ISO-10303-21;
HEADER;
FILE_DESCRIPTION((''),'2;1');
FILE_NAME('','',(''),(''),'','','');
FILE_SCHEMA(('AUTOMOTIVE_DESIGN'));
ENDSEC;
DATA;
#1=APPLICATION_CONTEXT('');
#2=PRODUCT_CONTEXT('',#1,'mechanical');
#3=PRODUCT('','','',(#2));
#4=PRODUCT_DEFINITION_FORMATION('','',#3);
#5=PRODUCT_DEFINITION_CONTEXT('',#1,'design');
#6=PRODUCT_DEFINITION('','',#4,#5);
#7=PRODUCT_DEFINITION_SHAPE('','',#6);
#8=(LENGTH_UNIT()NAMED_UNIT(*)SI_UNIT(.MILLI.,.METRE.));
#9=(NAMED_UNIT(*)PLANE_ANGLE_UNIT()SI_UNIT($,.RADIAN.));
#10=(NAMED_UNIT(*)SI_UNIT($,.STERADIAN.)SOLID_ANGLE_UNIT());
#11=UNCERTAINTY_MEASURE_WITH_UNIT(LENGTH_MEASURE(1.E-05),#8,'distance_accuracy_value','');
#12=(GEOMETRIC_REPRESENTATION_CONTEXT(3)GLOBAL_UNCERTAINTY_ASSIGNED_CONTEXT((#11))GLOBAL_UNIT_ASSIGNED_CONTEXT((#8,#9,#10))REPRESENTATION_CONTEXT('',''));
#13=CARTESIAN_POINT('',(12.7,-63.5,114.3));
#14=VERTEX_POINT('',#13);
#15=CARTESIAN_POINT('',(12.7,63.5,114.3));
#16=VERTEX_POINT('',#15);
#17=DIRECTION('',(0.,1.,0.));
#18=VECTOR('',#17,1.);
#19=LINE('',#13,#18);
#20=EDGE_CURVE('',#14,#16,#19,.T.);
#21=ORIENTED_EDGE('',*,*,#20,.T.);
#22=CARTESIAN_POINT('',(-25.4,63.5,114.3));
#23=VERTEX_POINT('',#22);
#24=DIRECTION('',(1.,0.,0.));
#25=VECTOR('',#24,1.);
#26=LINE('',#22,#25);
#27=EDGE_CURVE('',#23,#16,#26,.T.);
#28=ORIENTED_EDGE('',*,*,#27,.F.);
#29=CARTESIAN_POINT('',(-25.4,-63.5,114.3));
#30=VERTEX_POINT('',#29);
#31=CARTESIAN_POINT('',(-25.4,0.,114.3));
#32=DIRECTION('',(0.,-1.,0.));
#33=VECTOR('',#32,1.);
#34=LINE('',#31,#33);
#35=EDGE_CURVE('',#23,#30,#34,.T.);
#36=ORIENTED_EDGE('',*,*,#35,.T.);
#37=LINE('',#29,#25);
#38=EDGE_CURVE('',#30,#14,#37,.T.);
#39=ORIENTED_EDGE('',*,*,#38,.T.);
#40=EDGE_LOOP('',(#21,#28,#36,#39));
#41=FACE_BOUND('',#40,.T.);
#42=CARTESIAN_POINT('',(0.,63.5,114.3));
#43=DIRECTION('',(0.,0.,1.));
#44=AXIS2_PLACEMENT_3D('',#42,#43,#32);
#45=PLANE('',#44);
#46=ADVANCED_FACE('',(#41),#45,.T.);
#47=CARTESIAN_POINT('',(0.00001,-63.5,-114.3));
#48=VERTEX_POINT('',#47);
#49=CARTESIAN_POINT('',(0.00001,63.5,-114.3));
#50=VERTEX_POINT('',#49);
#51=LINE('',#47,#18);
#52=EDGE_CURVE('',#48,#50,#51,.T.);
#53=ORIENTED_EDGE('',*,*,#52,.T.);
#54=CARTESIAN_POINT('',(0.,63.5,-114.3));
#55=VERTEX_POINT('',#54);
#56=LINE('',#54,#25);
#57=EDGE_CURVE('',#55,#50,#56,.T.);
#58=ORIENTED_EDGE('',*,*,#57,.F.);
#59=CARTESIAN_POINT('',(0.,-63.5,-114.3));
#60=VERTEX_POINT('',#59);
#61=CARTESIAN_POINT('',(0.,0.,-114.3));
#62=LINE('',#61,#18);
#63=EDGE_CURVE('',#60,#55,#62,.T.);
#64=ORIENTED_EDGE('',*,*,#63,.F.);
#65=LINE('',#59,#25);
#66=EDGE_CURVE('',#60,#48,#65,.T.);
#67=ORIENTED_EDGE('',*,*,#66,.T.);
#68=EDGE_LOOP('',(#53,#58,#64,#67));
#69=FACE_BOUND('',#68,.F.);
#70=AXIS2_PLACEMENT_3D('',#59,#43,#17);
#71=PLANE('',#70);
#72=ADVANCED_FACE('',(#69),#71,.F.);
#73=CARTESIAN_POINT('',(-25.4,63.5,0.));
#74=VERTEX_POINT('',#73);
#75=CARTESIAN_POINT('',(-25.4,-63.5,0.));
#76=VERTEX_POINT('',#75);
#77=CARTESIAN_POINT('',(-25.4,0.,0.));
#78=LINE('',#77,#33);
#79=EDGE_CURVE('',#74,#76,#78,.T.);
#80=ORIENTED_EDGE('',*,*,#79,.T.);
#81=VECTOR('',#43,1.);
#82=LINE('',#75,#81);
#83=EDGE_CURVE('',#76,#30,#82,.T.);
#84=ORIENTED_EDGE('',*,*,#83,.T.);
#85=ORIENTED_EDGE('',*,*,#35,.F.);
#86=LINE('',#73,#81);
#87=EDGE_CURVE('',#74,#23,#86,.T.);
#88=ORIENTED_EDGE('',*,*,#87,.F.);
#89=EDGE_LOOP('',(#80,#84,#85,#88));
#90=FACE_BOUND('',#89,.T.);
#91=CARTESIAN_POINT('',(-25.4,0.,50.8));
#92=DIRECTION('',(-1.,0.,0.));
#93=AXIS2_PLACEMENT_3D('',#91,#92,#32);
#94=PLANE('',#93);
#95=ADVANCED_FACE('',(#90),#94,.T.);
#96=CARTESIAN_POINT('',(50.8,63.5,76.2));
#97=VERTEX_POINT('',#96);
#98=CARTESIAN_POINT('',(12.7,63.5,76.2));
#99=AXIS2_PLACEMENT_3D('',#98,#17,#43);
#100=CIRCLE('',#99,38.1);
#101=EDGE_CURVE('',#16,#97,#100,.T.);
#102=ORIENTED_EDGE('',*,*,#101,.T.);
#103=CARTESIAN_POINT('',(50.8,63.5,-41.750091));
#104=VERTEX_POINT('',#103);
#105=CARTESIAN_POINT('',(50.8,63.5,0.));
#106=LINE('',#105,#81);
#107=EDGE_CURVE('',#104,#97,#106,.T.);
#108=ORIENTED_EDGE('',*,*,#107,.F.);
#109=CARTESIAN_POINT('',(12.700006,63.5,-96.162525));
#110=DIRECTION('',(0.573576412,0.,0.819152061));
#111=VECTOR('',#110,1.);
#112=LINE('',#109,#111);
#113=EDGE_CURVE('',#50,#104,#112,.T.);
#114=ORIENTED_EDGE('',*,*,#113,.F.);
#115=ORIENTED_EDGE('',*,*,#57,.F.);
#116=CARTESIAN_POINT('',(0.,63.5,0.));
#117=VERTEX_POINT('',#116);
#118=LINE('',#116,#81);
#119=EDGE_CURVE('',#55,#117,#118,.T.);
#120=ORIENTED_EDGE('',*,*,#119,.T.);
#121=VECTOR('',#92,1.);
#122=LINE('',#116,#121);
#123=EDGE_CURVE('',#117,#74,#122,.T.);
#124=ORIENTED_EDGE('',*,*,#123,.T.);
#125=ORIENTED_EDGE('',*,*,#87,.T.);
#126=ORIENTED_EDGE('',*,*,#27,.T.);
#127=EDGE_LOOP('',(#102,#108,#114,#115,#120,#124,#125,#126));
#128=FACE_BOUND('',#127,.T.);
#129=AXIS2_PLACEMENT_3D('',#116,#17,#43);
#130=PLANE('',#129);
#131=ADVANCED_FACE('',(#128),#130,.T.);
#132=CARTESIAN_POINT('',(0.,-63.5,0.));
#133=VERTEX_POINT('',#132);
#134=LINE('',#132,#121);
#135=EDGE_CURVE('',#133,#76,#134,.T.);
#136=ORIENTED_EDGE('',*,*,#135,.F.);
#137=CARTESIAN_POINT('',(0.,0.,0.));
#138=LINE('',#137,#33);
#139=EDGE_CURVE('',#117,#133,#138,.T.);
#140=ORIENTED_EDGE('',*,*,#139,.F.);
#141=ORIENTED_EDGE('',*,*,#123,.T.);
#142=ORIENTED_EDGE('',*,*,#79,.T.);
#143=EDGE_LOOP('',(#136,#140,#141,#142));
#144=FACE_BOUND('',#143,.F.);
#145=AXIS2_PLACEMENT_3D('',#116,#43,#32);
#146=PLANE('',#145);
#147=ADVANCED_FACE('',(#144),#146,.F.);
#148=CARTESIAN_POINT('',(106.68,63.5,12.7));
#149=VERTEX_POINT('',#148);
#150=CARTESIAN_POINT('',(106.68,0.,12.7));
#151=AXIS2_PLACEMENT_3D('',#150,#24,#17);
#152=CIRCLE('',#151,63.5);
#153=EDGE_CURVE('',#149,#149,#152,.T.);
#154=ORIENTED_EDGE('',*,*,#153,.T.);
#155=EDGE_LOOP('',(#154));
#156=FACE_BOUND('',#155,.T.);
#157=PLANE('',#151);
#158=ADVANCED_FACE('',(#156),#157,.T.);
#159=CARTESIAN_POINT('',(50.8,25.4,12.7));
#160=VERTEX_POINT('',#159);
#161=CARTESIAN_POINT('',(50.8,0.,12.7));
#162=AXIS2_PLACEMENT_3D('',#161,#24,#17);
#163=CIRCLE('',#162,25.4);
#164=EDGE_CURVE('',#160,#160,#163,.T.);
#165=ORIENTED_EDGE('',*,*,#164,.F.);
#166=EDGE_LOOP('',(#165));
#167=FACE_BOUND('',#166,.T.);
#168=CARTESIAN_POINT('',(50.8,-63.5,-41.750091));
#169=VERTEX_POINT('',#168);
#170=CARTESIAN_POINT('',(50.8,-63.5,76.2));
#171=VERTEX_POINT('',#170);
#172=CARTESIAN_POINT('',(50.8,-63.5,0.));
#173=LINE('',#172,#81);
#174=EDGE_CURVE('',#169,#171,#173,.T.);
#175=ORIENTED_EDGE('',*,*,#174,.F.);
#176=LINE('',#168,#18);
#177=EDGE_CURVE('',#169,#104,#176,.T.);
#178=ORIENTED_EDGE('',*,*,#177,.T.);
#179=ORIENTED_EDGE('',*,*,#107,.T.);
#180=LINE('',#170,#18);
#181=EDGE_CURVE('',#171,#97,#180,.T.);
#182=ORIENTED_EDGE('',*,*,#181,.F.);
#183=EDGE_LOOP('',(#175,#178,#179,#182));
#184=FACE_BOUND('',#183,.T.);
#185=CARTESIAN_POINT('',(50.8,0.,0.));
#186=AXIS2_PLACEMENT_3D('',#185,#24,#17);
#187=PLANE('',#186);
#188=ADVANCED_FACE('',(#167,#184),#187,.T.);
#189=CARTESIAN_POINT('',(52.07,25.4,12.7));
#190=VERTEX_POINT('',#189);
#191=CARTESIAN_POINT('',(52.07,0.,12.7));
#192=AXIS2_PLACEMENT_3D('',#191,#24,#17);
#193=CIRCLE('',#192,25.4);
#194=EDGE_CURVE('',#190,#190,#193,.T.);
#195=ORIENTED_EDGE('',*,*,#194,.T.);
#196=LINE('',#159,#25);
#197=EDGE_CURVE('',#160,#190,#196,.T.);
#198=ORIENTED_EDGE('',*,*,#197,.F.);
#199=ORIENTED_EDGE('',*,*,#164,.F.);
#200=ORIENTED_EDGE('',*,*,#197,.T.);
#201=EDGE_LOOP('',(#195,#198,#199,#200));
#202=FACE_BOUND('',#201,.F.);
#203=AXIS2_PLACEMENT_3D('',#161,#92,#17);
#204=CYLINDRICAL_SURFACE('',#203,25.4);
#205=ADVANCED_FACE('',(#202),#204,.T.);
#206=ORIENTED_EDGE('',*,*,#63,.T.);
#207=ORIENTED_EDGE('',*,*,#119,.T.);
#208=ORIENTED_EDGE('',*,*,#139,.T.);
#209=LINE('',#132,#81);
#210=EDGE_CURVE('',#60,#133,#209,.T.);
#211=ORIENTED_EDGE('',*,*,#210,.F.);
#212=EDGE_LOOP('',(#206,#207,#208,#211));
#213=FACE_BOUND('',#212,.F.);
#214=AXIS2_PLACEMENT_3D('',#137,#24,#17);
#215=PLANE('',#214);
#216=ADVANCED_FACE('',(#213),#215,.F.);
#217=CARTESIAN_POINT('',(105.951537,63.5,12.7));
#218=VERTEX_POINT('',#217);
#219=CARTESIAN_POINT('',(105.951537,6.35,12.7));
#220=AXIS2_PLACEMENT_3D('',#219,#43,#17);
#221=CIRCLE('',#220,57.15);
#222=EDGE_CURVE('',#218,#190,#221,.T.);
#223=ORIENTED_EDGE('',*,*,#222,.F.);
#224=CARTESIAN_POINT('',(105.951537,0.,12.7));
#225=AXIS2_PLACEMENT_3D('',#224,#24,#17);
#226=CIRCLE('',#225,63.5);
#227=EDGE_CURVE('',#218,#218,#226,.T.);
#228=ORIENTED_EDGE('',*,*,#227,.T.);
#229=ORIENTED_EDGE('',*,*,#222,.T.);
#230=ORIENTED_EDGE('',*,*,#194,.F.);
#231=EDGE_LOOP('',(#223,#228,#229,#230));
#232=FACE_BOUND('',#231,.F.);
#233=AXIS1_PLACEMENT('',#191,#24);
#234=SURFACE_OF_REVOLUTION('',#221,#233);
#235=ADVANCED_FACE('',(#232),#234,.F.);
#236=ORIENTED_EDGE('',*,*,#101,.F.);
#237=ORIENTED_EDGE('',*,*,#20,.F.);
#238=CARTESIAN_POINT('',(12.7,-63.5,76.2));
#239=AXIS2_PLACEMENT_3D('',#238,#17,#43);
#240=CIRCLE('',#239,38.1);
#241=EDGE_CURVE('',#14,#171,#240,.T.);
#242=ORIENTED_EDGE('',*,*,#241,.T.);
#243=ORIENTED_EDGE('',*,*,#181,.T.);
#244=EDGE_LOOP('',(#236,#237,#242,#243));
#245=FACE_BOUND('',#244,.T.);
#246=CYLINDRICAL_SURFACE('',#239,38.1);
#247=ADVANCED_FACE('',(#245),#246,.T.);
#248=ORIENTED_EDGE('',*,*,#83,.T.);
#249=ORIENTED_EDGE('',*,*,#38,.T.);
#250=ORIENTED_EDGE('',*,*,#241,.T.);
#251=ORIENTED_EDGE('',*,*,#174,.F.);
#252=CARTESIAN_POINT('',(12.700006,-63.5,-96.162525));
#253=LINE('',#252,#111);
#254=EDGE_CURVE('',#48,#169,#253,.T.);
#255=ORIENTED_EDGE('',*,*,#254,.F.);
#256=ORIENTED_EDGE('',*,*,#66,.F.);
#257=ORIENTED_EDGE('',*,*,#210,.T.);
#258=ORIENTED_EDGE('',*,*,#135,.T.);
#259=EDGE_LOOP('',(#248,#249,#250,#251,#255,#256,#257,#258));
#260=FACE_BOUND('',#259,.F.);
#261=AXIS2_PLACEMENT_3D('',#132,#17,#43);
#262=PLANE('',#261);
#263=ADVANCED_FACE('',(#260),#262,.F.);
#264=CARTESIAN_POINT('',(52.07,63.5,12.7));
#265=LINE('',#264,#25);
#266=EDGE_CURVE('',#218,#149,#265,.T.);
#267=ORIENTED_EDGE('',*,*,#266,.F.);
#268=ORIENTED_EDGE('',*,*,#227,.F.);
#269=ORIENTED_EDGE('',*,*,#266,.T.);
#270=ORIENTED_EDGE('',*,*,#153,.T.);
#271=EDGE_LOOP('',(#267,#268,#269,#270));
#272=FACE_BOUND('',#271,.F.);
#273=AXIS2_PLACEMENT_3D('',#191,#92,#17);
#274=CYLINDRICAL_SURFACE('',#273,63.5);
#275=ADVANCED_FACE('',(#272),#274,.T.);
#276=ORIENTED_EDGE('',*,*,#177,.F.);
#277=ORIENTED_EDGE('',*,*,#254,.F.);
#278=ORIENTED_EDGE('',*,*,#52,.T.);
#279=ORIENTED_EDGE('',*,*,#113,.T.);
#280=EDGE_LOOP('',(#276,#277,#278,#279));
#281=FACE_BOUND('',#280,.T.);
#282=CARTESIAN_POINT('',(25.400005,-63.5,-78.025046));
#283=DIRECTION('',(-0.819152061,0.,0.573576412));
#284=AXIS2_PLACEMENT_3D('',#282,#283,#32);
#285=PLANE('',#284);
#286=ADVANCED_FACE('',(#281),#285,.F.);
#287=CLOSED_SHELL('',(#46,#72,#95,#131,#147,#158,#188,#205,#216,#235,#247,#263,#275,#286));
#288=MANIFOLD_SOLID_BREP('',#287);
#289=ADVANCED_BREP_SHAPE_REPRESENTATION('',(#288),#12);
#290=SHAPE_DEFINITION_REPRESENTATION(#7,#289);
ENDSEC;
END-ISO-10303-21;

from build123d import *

# Parameters (mm, degrees)
F0_W      = 127
F0_H      = 228.6
F1_DEPTH  = 50.8
F2_R      = 38.1
F3_SIZE2  = 72.549909
F3_SIZE   = 50.79999
F4_W      = 127
F4_H      = 12.7
F5_DEPTH  = 25.4
F6_W      = 127
F6_H      = 101.6
F7_DEPTH  = 25.4
F8_R      = 25.4
F9_DEPTH  = 1.27
F10_R     = 63.5
F11_DEPTH = 54.61


# Not quite as in the source:
# - a fillet or chamfer that OpenCascade refuses, or shapes differently, is made with other operations: its cross-section is extruded or revolved along the edge and cut away or added
# - a fillet or chamfer is up to 0.001 mm smaller than in the source, because OpenCascade refuses the exact size


with BuildPart() as f1:
    # F0 (on Right) → F1 (new body)
    with BuildSketch(Plane.YZ):
        Rectangle(F0_W, F0_H)
    extrude(amount=F1_DEPTH)

    # F2
    f2_edges = [f1.edges().sort_by_distance(p)[0] for p in [
        (50.8, 0, 114.3),
    ]]
    fillet(f2_edges, radius=F2_R)

    # F3 (size 50.8 and 72.5499187425 in the source; OpenCascade refuses exactly that, so slightly less here)
    f3_edges = [f1.edges().sort_by_distance(p)[0] for p in [
        (50.8, 0, -114.3),
    ]]
    f3_side = f1.faces().sort_by_distance((25.4, 0, -114.3))[0]
    chamfer(f3_edges, length=F3_SIZE, length2=F3_SIZE2, reference=f3_side)

    # F4 (on face) → F5 (join)
    with BuildSketch(Plane(origin=(0, 0, 0), x_dir=(0, -1, 0), z_dir=(-1, 0, 0))):
        with Locations((0, 107.95)):
            Rectangle(F4_W, F4_H)
    extrude(amount=F5_DEPTH)

    # F6 (on face) → F7 (join)
    with BuildSketch(Plane(origin=(0, 0, 0), x_dir=(0, -1, 0), z_dir=(-1, 0, 0))):
        with Locations((0, 50.8)):
            Rectangle(F6_W, F6_H)
    extrude(amount=F7_DEPTH)

    # F8 (on face) → F9 (join)
    with BuildSketch(Plane.YZ.offset(50.8)):
        with Locations((0, 12.7)):
            Circle(F8_R)
    extrude(amount=F9_DEPTH)

    # F10 (on face) → F11 (join)
    with BuildSketch(Plane.YZ.offset(52.07)):
        with Locations((0, 12.7)):
            Circle(F10_R)
    extrude(amount=F11_DEPTH)

    # F12: fillet of radius 57.15 on 1 edges, made by hand

    # F12_s1 → F12_t2 (revolve, cut)
    with BuildSketch(Plane.XY.offset(12.7)):
        with BuildLine():
            ThreePointArc((105.9515367264, 63.5), (72.9559688422, 53.0127796), (52.07, 25.4))
            Line((52.07, 25.4), (52.07, 63.5))
            Line((52.07, 63.5), (105.9515367264, 63.5))
        make_face()
    revolve(axis=Axis((52.07, 0, 12.7), (1, 0, 0)), mode=Mode.SUBTRACT)


solid = f1.part
